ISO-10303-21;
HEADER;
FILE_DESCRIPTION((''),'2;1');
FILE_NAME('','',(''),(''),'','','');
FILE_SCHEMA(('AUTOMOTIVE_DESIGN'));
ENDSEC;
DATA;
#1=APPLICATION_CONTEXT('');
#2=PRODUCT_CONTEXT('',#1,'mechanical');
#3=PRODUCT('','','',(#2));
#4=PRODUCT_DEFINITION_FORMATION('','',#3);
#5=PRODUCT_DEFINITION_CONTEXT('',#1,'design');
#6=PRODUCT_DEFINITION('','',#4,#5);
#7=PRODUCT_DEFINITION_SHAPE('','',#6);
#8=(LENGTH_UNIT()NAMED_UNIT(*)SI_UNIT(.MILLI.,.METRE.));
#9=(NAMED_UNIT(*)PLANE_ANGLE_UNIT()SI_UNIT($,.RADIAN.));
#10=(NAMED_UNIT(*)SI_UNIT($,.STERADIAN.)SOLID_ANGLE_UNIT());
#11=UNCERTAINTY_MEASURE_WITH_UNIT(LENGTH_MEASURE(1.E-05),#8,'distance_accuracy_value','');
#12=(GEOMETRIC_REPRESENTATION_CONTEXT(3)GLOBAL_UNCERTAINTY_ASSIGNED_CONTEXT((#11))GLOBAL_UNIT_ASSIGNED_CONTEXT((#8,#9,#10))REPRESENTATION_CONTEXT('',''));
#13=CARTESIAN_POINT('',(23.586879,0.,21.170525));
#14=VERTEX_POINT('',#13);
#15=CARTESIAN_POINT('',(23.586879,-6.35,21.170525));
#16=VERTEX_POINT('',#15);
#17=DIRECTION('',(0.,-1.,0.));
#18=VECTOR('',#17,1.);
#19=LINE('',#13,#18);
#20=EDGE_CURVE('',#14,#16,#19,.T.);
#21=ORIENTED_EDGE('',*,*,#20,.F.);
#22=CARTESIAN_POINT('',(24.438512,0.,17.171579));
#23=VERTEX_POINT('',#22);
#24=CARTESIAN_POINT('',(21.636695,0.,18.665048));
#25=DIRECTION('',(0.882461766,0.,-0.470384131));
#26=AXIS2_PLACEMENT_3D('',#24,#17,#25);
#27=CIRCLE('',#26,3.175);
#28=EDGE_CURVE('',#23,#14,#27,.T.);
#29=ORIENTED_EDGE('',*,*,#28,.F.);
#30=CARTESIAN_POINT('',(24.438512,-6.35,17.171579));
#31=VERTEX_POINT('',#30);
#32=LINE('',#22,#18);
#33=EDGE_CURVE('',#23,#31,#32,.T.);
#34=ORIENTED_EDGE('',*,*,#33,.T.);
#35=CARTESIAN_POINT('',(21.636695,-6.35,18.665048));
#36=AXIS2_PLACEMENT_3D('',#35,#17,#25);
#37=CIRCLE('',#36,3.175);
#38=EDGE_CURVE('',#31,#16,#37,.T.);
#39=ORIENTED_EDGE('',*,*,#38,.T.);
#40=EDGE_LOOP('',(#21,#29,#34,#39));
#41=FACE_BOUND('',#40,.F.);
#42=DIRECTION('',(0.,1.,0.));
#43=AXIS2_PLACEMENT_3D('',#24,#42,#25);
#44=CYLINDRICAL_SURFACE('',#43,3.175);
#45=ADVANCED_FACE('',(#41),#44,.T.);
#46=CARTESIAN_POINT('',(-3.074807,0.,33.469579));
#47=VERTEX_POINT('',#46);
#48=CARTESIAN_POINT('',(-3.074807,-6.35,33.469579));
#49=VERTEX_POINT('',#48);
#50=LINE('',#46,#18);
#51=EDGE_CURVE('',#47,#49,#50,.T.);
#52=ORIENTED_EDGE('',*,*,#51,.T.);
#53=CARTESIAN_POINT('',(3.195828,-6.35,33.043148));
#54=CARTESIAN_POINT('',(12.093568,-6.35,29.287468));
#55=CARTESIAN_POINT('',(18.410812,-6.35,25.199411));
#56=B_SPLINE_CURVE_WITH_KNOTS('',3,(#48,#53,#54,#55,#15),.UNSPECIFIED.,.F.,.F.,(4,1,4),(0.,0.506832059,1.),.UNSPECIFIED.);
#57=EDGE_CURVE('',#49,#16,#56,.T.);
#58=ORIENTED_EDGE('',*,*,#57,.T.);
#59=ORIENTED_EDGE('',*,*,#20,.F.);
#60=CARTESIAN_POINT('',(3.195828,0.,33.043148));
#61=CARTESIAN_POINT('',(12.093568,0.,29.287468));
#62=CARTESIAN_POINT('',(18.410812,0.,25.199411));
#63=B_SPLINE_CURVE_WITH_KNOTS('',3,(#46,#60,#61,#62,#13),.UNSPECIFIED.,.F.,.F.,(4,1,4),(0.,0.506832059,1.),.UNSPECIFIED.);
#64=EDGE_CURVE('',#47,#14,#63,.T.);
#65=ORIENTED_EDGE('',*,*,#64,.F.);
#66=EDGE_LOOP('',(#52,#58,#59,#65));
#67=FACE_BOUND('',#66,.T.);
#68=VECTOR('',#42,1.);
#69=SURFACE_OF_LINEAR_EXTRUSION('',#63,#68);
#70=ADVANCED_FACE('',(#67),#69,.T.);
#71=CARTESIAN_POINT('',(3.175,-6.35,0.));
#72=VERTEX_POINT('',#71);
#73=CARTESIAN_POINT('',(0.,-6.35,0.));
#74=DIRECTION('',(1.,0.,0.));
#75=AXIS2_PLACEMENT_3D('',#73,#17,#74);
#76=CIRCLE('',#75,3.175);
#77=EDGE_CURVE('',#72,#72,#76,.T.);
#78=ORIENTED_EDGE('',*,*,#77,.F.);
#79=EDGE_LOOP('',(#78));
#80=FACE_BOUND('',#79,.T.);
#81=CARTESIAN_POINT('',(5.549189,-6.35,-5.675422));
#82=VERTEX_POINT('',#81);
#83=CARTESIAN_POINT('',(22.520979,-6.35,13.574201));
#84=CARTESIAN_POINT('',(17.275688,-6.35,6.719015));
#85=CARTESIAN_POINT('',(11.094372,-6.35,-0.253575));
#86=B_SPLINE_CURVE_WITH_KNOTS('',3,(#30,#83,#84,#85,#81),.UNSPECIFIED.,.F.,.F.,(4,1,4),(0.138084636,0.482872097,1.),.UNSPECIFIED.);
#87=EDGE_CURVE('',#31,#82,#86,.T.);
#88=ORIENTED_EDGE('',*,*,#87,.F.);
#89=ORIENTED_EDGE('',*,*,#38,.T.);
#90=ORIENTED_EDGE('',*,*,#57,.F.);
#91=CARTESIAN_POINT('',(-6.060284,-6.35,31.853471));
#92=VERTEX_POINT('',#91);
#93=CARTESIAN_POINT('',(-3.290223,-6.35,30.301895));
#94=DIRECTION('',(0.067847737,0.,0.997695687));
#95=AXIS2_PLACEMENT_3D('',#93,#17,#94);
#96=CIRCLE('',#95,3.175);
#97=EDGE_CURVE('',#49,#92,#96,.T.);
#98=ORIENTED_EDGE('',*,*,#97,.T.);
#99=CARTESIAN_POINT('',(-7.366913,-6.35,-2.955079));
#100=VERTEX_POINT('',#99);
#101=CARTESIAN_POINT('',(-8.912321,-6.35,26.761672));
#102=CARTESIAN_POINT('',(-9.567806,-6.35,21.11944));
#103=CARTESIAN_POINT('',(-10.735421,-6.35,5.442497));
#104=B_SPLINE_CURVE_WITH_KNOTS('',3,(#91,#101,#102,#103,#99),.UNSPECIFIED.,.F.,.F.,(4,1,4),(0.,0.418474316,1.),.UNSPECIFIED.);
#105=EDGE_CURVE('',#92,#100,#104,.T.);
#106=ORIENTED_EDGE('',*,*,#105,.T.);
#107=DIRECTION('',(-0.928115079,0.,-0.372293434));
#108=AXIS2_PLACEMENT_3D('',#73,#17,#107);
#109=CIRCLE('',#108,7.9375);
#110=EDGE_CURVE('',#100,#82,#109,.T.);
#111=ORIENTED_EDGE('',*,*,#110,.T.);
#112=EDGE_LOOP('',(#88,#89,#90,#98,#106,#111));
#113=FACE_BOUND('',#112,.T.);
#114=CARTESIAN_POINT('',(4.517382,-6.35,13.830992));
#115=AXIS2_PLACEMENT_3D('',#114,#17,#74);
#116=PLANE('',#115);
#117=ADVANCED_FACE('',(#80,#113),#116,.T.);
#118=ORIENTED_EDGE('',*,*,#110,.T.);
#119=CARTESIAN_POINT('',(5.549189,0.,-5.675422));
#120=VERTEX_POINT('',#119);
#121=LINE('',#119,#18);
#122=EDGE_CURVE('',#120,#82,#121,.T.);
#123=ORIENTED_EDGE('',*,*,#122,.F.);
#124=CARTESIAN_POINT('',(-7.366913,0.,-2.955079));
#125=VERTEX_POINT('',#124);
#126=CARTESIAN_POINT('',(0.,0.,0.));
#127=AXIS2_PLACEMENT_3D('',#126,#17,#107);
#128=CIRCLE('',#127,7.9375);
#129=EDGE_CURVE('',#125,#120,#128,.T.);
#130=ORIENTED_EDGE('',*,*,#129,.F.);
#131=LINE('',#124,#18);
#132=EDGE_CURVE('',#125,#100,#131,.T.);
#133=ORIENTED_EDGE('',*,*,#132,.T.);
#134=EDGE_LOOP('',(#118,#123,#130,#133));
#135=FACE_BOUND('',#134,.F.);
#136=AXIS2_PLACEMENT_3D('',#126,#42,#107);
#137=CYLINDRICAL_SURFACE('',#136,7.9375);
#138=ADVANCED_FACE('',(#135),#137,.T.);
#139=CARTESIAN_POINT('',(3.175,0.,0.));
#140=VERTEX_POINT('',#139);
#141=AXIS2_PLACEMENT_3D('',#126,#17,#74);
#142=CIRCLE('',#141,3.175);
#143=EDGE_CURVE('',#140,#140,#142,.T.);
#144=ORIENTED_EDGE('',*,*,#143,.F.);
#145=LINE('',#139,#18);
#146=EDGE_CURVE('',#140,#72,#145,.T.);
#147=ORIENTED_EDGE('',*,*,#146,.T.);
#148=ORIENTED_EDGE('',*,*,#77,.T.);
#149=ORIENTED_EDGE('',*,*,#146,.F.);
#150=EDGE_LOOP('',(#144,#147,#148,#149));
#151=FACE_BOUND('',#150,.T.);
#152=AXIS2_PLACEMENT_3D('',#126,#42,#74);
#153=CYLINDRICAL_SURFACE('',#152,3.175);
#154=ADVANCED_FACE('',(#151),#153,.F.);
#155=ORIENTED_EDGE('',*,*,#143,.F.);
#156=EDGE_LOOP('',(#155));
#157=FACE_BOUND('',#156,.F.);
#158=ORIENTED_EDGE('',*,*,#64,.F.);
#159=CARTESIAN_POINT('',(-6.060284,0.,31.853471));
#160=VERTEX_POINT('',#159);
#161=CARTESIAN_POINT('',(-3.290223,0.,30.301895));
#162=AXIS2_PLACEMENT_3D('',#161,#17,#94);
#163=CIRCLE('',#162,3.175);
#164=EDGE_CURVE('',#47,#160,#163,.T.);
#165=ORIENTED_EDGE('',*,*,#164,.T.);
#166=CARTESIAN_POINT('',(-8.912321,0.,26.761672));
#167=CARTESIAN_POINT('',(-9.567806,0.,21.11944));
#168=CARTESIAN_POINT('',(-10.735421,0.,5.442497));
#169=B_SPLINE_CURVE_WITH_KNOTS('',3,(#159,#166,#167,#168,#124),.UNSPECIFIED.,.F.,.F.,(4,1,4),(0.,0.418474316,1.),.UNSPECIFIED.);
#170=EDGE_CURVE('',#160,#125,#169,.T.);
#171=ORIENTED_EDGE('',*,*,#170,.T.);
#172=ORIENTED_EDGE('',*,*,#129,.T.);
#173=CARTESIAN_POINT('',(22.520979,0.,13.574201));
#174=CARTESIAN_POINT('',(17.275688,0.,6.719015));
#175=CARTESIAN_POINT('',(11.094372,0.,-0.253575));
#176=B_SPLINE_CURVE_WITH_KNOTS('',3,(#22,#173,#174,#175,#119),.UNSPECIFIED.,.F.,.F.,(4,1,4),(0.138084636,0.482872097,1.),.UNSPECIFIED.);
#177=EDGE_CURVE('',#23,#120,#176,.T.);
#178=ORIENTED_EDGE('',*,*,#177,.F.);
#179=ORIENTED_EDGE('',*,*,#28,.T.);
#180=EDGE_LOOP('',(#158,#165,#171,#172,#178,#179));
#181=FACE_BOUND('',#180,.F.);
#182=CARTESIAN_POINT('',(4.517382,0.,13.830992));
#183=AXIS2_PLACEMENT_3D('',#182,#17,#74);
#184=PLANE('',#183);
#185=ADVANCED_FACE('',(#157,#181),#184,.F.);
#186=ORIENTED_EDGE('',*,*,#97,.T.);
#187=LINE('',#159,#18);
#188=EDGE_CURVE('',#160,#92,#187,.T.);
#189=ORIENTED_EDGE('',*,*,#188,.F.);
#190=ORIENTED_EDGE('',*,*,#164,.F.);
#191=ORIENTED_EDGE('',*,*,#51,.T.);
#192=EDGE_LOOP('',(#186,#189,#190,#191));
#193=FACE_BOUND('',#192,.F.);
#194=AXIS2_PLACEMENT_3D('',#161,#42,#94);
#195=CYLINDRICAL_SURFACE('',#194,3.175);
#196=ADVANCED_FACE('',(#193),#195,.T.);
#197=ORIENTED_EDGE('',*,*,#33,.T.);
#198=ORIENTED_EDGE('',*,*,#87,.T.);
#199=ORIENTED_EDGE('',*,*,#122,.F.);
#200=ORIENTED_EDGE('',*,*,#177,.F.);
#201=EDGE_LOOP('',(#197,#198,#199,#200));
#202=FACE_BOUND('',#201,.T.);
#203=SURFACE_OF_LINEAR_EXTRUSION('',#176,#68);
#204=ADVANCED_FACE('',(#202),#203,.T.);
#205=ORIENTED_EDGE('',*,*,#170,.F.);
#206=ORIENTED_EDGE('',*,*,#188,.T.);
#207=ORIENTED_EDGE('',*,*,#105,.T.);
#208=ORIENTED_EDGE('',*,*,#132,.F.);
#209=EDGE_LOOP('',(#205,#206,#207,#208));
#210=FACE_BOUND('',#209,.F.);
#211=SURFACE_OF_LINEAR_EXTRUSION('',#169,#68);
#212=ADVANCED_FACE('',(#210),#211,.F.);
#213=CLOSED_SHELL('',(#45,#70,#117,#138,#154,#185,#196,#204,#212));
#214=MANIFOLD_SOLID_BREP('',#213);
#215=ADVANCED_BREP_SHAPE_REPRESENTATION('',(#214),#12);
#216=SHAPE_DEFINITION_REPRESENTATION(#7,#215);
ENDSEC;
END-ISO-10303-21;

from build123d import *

# Parameters (mm, degrees)
F0_R     = 3.175
F1_DEPTH = 6.35


with BuildPart() as f1:
    # F0 (on Front) → F1 (new body)
    with BuildSketch(Plane.XZ):
        with BuildLine():
            add(Edge.make_bspline(
                [(-6.0602840723, 31.8534711944), (-8.9123209928, 26.7616721507), (-9.5678060072, 21.1194401062), (-10.7354209084, 5.442497338), (-7.3669134372, -2.9550791291)],
                knots=[0, 0, 0, 0, 0.4184743156, 1, 1, 1, 1], degree=3))
            ThreePointArc((-7.3669134372, -2.9550791291), (-1.63587801, -7.7670978741), (5.5491886165, -5.6754217419))
            add(Edge.make_bspline(
                [(24.4385115585, 17.1715788698), (22.5209788834, 13.5742014085), (17.275688011, 6.7190147021), (11.0943717174, -0.2535749894), (5.5491886165, -5.6754217419)],
                knots=[0.1380846356, 0.1380846356, 0.1380846356, 0.1380846356, 0.4828720967, 1, 1, 1, 1], degree=3))
            ThreePointArc((24.4385115585, 17.1715788698), (24.7420563147, 19.326379645), (23.5868786889, 21.1705245559))
            add(Edge.make_bspline(
                [(-3.074806905, 33.4695786248), (3.1958280854, 33.0431476028), (12.0935678521, 29.2874679133), (18.4108124786, 25.1994105978), (23.5868786889, 21.1705245559)],
                knots=[0, 0, 0, 0, 0.5068320595, 1, 1, 1, 1], degree=3))
            ThreePointArc((-3.074806905, 33.4695786248), (-4.8016804973, 33.0940485831), (-6.0602840723, 31.8534711944))
        make_face()
        Circle(F0_R, mode=Mode.SUBTRACT)
    extrude(amount=F1_DEPTH)


solid = f1.part
